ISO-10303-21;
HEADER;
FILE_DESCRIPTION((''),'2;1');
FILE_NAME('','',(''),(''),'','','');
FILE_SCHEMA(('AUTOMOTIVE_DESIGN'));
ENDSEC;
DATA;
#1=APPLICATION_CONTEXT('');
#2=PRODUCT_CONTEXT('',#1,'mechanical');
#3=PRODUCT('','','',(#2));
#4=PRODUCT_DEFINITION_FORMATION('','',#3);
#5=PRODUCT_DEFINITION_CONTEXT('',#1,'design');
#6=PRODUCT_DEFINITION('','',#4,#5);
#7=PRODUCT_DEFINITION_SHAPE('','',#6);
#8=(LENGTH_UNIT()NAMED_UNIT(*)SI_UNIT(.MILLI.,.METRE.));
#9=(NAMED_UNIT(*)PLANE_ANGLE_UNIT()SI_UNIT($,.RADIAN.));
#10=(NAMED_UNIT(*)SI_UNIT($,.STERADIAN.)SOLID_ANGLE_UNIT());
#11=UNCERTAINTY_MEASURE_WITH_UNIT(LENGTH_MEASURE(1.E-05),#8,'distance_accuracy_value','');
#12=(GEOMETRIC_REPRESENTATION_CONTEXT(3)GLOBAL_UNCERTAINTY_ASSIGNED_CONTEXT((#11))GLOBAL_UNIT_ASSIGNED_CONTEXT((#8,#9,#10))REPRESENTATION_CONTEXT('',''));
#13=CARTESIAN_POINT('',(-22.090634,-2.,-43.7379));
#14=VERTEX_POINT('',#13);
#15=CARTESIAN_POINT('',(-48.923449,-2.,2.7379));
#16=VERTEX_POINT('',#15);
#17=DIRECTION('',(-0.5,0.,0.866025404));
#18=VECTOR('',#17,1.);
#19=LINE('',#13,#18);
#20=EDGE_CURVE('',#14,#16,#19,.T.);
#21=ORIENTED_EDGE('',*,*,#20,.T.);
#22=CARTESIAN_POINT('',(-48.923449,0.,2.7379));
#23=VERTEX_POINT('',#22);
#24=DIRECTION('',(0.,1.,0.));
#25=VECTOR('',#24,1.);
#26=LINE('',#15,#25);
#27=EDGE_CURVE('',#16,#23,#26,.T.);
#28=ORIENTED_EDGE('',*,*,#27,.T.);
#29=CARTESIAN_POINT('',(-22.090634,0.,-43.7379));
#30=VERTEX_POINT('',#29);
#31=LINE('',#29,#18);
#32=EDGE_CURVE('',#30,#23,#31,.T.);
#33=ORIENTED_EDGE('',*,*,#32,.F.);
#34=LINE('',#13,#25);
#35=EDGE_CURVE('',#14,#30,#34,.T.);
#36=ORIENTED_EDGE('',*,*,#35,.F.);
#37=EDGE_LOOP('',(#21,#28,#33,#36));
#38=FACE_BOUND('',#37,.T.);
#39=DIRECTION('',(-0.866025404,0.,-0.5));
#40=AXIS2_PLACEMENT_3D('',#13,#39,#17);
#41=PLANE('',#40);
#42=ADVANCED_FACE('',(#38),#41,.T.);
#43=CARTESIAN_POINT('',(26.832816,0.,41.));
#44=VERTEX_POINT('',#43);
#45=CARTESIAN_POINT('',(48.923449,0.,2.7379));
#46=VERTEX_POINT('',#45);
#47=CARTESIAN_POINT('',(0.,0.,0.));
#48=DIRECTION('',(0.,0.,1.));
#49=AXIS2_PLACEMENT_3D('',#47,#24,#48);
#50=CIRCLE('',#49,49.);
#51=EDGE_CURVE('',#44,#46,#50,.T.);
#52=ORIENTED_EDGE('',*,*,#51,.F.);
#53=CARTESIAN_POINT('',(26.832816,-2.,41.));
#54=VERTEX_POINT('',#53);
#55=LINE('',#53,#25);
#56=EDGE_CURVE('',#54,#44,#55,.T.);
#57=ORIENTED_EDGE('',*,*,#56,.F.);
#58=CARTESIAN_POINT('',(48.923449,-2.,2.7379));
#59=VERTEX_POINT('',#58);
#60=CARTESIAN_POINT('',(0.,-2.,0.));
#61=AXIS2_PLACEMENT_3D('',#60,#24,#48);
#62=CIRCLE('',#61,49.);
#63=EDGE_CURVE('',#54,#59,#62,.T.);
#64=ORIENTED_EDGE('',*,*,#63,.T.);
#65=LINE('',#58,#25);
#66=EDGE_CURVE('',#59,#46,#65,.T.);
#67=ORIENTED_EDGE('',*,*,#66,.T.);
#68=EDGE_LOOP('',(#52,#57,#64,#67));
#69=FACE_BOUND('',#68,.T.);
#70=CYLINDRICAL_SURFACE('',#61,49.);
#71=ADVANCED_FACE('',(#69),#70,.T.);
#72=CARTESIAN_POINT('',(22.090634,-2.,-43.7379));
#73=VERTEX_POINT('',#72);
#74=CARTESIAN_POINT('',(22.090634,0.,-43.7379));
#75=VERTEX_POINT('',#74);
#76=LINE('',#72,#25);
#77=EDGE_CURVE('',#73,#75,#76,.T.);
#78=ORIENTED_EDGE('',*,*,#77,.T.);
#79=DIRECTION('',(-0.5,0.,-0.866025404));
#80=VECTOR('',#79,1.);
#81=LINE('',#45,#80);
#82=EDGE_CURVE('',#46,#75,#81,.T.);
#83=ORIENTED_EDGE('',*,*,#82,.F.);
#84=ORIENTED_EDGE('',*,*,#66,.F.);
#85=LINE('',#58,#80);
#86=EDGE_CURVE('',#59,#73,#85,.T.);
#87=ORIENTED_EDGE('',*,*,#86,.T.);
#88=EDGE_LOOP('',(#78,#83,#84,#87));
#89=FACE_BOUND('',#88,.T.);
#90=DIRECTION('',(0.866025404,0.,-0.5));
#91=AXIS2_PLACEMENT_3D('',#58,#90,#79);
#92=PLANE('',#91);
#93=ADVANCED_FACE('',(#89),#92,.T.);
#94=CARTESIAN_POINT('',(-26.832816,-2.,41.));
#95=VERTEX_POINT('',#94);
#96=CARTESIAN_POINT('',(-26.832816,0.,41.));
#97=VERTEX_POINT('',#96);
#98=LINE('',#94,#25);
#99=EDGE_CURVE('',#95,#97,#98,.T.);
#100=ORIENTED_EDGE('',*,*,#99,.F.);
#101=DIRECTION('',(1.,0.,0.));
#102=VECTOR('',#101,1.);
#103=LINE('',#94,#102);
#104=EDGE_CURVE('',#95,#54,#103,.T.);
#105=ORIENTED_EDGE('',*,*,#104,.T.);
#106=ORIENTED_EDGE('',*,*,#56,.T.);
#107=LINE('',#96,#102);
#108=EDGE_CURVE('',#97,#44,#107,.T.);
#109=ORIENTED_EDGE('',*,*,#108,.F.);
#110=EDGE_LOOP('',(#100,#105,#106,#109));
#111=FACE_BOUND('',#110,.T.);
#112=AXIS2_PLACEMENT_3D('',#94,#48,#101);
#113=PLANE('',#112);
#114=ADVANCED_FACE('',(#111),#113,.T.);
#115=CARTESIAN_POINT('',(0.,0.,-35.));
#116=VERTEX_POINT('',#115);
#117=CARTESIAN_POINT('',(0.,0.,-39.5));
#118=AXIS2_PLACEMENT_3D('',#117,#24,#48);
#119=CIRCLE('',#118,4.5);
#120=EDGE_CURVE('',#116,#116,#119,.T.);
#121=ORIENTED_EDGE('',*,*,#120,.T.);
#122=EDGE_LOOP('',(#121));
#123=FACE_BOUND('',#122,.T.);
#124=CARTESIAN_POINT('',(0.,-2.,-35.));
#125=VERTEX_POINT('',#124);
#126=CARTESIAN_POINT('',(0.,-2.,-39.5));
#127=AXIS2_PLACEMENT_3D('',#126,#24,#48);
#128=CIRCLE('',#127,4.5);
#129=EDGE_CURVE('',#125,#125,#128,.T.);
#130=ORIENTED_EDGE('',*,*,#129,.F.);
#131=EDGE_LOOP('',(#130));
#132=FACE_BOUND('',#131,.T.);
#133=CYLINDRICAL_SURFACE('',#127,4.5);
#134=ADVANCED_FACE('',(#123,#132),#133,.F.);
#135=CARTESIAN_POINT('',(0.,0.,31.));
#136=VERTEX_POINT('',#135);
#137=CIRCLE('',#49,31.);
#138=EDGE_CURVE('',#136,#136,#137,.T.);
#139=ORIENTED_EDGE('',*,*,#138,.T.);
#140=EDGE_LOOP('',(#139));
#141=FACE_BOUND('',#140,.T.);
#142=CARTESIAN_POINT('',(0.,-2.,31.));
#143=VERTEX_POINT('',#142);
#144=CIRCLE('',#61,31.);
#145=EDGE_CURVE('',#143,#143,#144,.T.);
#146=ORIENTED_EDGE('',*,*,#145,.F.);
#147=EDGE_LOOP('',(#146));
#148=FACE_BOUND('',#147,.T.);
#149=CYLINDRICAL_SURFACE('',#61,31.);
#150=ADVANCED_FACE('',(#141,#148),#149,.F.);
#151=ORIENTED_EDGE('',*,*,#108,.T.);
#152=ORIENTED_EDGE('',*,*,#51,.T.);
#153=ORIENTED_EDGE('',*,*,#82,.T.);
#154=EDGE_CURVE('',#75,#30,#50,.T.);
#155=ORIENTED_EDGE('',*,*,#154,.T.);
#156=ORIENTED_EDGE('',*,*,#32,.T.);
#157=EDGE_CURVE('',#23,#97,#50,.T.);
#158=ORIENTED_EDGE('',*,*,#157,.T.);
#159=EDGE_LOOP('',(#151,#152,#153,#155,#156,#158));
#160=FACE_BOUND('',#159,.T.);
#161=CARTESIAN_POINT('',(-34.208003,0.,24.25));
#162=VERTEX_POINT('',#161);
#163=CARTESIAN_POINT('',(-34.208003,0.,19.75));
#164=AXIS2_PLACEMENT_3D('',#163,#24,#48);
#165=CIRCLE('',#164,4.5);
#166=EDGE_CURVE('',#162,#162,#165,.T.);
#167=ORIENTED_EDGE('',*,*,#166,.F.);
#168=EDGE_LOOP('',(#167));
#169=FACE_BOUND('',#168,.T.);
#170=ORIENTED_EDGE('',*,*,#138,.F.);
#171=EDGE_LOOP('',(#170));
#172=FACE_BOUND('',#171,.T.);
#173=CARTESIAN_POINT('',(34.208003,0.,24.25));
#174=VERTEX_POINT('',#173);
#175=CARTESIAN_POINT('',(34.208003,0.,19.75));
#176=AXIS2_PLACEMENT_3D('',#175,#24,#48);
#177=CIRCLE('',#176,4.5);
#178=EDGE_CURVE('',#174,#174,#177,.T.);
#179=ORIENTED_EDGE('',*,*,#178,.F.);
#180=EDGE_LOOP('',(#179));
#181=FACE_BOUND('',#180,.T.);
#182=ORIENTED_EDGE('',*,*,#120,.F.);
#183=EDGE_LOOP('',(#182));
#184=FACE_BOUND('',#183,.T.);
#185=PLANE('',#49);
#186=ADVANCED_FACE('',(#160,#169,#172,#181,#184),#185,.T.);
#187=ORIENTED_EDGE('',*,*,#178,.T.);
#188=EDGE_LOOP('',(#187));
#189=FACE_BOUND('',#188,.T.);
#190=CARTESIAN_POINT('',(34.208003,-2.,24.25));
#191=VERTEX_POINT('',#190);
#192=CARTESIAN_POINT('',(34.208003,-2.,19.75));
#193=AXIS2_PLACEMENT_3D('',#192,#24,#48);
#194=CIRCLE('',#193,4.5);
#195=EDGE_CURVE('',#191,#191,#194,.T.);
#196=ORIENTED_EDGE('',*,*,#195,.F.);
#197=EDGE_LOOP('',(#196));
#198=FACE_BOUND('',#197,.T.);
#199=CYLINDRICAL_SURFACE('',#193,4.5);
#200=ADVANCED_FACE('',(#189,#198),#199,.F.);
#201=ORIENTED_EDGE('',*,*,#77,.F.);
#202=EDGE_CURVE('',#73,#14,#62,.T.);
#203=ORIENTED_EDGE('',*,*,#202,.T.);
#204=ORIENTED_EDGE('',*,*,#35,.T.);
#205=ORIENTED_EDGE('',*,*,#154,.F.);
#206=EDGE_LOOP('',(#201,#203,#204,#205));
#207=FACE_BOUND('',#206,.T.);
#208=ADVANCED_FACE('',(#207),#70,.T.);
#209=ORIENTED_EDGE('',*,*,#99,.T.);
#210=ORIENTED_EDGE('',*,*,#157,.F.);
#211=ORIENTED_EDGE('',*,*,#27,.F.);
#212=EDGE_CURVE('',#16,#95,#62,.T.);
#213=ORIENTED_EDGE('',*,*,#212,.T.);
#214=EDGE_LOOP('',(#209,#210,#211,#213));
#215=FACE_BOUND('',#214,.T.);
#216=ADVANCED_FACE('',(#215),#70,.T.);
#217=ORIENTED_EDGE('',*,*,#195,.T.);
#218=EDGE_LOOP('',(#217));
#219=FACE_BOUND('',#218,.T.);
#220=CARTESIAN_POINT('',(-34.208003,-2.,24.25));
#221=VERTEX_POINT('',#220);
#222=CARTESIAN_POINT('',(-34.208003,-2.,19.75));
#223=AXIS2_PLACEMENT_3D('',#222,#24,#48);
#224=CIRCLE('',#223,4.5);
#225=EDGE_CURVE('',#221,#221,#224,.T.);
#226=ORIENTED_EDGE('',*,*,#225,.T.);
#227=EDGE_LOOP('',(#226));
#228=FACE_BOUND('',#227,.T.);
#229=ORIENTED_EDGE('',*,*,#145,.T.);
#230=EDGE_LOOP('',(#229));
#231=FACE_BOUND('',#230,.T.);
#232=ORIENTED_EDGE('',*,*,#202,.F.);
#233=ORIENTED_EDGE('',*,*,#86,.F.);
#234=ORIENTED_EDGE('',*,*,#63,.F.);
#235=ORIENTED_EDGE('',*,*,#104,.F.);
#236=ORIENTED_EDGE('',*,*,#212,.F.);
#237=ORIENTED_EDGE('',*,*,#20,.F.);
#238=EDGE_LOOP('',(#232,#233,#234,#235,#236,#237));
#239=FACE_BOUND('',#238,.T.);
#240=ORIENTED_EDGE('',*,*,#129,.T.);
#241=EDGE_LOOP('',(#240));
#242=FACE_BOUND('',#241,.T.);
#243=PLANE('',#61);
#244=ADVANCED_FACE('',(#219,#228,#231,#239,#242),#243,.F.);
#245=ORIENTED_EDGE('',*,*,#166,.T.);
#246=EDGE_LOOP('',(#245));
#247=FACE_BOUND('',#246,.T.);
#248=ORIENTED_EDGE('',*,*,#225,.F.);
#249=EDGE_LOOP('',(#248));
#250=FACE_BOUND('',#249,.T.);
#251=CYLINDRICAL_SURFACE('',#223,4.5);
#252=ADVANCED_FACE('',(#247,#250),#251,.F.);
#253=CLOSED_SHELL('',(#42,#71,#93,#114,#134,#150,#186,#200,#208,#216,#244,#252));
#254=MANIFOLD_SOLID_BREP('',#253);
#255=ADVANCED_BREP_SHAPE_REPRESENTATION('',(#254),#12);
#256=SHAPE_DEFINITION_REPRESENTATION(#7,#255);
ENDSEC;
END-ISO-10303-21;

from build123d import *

# Parameters (mm, degrees)
ESBO_O1_R          = 31
ESBO_O1_R_2        = 4.5
FLANGE_BASE1_DEPTH = 2


# Sheet-metal steps are written as plain solids
with BuildPart() as part:
    # Esboço1 → Flange-base1 (new body)
    with BuildSketch(Plane(origin=(0, 0, 0), x_dir=(1, 0, 0), z_dir=(0, 1, 0))):
        with BuildLine():
            Line((-22.09063369, 43.737900077), (-48.92344942, -2.737900077))
            ThreePointArc((-48.92344942, -2.737900077), (-42.435244785, -24.5), (-26.83281573, -41))
            Line((-26.83281573, -41), (26.83281573, -41))
            ThreePointArc((26.83281573, -41), (42.435244785, -24.5), (48.92344942, -2.737900077))
            Line((48.92344942, -2.737900077), (22.09063369, 43.737900077))
            ThreePointArc((22.09063369, 43.737900077), (0, 49), (-22.09063369, 43.737900077))
        make_face()
        with Locations(Location((0, 0, 0), (0, 0, 270))):
            Circle(ESBO_O1_R, mode=Mode.SUBTRACT)
        with Locations(Location((0, 39.5, 0), (0, 0, 270))):
            Circle(ESBO_O1_R_2, mode=Mode.SUBTRACT)
        with Locations(Location((34.208003449, -19.75, 0), (0, 0, 270))):
            Circle(ESBO_O1_R_2, mode=Mode.SUBTRACT)
        with Locations(Location((-34.208003449, -19.75, 0), (0, 0, 270))):
            Circle(ESBO_O1_R_2, mode=Mode.SUBTRACT)
    extrude(amount=-FLANGE_BASE1_DEPTH)


solid = part.part
